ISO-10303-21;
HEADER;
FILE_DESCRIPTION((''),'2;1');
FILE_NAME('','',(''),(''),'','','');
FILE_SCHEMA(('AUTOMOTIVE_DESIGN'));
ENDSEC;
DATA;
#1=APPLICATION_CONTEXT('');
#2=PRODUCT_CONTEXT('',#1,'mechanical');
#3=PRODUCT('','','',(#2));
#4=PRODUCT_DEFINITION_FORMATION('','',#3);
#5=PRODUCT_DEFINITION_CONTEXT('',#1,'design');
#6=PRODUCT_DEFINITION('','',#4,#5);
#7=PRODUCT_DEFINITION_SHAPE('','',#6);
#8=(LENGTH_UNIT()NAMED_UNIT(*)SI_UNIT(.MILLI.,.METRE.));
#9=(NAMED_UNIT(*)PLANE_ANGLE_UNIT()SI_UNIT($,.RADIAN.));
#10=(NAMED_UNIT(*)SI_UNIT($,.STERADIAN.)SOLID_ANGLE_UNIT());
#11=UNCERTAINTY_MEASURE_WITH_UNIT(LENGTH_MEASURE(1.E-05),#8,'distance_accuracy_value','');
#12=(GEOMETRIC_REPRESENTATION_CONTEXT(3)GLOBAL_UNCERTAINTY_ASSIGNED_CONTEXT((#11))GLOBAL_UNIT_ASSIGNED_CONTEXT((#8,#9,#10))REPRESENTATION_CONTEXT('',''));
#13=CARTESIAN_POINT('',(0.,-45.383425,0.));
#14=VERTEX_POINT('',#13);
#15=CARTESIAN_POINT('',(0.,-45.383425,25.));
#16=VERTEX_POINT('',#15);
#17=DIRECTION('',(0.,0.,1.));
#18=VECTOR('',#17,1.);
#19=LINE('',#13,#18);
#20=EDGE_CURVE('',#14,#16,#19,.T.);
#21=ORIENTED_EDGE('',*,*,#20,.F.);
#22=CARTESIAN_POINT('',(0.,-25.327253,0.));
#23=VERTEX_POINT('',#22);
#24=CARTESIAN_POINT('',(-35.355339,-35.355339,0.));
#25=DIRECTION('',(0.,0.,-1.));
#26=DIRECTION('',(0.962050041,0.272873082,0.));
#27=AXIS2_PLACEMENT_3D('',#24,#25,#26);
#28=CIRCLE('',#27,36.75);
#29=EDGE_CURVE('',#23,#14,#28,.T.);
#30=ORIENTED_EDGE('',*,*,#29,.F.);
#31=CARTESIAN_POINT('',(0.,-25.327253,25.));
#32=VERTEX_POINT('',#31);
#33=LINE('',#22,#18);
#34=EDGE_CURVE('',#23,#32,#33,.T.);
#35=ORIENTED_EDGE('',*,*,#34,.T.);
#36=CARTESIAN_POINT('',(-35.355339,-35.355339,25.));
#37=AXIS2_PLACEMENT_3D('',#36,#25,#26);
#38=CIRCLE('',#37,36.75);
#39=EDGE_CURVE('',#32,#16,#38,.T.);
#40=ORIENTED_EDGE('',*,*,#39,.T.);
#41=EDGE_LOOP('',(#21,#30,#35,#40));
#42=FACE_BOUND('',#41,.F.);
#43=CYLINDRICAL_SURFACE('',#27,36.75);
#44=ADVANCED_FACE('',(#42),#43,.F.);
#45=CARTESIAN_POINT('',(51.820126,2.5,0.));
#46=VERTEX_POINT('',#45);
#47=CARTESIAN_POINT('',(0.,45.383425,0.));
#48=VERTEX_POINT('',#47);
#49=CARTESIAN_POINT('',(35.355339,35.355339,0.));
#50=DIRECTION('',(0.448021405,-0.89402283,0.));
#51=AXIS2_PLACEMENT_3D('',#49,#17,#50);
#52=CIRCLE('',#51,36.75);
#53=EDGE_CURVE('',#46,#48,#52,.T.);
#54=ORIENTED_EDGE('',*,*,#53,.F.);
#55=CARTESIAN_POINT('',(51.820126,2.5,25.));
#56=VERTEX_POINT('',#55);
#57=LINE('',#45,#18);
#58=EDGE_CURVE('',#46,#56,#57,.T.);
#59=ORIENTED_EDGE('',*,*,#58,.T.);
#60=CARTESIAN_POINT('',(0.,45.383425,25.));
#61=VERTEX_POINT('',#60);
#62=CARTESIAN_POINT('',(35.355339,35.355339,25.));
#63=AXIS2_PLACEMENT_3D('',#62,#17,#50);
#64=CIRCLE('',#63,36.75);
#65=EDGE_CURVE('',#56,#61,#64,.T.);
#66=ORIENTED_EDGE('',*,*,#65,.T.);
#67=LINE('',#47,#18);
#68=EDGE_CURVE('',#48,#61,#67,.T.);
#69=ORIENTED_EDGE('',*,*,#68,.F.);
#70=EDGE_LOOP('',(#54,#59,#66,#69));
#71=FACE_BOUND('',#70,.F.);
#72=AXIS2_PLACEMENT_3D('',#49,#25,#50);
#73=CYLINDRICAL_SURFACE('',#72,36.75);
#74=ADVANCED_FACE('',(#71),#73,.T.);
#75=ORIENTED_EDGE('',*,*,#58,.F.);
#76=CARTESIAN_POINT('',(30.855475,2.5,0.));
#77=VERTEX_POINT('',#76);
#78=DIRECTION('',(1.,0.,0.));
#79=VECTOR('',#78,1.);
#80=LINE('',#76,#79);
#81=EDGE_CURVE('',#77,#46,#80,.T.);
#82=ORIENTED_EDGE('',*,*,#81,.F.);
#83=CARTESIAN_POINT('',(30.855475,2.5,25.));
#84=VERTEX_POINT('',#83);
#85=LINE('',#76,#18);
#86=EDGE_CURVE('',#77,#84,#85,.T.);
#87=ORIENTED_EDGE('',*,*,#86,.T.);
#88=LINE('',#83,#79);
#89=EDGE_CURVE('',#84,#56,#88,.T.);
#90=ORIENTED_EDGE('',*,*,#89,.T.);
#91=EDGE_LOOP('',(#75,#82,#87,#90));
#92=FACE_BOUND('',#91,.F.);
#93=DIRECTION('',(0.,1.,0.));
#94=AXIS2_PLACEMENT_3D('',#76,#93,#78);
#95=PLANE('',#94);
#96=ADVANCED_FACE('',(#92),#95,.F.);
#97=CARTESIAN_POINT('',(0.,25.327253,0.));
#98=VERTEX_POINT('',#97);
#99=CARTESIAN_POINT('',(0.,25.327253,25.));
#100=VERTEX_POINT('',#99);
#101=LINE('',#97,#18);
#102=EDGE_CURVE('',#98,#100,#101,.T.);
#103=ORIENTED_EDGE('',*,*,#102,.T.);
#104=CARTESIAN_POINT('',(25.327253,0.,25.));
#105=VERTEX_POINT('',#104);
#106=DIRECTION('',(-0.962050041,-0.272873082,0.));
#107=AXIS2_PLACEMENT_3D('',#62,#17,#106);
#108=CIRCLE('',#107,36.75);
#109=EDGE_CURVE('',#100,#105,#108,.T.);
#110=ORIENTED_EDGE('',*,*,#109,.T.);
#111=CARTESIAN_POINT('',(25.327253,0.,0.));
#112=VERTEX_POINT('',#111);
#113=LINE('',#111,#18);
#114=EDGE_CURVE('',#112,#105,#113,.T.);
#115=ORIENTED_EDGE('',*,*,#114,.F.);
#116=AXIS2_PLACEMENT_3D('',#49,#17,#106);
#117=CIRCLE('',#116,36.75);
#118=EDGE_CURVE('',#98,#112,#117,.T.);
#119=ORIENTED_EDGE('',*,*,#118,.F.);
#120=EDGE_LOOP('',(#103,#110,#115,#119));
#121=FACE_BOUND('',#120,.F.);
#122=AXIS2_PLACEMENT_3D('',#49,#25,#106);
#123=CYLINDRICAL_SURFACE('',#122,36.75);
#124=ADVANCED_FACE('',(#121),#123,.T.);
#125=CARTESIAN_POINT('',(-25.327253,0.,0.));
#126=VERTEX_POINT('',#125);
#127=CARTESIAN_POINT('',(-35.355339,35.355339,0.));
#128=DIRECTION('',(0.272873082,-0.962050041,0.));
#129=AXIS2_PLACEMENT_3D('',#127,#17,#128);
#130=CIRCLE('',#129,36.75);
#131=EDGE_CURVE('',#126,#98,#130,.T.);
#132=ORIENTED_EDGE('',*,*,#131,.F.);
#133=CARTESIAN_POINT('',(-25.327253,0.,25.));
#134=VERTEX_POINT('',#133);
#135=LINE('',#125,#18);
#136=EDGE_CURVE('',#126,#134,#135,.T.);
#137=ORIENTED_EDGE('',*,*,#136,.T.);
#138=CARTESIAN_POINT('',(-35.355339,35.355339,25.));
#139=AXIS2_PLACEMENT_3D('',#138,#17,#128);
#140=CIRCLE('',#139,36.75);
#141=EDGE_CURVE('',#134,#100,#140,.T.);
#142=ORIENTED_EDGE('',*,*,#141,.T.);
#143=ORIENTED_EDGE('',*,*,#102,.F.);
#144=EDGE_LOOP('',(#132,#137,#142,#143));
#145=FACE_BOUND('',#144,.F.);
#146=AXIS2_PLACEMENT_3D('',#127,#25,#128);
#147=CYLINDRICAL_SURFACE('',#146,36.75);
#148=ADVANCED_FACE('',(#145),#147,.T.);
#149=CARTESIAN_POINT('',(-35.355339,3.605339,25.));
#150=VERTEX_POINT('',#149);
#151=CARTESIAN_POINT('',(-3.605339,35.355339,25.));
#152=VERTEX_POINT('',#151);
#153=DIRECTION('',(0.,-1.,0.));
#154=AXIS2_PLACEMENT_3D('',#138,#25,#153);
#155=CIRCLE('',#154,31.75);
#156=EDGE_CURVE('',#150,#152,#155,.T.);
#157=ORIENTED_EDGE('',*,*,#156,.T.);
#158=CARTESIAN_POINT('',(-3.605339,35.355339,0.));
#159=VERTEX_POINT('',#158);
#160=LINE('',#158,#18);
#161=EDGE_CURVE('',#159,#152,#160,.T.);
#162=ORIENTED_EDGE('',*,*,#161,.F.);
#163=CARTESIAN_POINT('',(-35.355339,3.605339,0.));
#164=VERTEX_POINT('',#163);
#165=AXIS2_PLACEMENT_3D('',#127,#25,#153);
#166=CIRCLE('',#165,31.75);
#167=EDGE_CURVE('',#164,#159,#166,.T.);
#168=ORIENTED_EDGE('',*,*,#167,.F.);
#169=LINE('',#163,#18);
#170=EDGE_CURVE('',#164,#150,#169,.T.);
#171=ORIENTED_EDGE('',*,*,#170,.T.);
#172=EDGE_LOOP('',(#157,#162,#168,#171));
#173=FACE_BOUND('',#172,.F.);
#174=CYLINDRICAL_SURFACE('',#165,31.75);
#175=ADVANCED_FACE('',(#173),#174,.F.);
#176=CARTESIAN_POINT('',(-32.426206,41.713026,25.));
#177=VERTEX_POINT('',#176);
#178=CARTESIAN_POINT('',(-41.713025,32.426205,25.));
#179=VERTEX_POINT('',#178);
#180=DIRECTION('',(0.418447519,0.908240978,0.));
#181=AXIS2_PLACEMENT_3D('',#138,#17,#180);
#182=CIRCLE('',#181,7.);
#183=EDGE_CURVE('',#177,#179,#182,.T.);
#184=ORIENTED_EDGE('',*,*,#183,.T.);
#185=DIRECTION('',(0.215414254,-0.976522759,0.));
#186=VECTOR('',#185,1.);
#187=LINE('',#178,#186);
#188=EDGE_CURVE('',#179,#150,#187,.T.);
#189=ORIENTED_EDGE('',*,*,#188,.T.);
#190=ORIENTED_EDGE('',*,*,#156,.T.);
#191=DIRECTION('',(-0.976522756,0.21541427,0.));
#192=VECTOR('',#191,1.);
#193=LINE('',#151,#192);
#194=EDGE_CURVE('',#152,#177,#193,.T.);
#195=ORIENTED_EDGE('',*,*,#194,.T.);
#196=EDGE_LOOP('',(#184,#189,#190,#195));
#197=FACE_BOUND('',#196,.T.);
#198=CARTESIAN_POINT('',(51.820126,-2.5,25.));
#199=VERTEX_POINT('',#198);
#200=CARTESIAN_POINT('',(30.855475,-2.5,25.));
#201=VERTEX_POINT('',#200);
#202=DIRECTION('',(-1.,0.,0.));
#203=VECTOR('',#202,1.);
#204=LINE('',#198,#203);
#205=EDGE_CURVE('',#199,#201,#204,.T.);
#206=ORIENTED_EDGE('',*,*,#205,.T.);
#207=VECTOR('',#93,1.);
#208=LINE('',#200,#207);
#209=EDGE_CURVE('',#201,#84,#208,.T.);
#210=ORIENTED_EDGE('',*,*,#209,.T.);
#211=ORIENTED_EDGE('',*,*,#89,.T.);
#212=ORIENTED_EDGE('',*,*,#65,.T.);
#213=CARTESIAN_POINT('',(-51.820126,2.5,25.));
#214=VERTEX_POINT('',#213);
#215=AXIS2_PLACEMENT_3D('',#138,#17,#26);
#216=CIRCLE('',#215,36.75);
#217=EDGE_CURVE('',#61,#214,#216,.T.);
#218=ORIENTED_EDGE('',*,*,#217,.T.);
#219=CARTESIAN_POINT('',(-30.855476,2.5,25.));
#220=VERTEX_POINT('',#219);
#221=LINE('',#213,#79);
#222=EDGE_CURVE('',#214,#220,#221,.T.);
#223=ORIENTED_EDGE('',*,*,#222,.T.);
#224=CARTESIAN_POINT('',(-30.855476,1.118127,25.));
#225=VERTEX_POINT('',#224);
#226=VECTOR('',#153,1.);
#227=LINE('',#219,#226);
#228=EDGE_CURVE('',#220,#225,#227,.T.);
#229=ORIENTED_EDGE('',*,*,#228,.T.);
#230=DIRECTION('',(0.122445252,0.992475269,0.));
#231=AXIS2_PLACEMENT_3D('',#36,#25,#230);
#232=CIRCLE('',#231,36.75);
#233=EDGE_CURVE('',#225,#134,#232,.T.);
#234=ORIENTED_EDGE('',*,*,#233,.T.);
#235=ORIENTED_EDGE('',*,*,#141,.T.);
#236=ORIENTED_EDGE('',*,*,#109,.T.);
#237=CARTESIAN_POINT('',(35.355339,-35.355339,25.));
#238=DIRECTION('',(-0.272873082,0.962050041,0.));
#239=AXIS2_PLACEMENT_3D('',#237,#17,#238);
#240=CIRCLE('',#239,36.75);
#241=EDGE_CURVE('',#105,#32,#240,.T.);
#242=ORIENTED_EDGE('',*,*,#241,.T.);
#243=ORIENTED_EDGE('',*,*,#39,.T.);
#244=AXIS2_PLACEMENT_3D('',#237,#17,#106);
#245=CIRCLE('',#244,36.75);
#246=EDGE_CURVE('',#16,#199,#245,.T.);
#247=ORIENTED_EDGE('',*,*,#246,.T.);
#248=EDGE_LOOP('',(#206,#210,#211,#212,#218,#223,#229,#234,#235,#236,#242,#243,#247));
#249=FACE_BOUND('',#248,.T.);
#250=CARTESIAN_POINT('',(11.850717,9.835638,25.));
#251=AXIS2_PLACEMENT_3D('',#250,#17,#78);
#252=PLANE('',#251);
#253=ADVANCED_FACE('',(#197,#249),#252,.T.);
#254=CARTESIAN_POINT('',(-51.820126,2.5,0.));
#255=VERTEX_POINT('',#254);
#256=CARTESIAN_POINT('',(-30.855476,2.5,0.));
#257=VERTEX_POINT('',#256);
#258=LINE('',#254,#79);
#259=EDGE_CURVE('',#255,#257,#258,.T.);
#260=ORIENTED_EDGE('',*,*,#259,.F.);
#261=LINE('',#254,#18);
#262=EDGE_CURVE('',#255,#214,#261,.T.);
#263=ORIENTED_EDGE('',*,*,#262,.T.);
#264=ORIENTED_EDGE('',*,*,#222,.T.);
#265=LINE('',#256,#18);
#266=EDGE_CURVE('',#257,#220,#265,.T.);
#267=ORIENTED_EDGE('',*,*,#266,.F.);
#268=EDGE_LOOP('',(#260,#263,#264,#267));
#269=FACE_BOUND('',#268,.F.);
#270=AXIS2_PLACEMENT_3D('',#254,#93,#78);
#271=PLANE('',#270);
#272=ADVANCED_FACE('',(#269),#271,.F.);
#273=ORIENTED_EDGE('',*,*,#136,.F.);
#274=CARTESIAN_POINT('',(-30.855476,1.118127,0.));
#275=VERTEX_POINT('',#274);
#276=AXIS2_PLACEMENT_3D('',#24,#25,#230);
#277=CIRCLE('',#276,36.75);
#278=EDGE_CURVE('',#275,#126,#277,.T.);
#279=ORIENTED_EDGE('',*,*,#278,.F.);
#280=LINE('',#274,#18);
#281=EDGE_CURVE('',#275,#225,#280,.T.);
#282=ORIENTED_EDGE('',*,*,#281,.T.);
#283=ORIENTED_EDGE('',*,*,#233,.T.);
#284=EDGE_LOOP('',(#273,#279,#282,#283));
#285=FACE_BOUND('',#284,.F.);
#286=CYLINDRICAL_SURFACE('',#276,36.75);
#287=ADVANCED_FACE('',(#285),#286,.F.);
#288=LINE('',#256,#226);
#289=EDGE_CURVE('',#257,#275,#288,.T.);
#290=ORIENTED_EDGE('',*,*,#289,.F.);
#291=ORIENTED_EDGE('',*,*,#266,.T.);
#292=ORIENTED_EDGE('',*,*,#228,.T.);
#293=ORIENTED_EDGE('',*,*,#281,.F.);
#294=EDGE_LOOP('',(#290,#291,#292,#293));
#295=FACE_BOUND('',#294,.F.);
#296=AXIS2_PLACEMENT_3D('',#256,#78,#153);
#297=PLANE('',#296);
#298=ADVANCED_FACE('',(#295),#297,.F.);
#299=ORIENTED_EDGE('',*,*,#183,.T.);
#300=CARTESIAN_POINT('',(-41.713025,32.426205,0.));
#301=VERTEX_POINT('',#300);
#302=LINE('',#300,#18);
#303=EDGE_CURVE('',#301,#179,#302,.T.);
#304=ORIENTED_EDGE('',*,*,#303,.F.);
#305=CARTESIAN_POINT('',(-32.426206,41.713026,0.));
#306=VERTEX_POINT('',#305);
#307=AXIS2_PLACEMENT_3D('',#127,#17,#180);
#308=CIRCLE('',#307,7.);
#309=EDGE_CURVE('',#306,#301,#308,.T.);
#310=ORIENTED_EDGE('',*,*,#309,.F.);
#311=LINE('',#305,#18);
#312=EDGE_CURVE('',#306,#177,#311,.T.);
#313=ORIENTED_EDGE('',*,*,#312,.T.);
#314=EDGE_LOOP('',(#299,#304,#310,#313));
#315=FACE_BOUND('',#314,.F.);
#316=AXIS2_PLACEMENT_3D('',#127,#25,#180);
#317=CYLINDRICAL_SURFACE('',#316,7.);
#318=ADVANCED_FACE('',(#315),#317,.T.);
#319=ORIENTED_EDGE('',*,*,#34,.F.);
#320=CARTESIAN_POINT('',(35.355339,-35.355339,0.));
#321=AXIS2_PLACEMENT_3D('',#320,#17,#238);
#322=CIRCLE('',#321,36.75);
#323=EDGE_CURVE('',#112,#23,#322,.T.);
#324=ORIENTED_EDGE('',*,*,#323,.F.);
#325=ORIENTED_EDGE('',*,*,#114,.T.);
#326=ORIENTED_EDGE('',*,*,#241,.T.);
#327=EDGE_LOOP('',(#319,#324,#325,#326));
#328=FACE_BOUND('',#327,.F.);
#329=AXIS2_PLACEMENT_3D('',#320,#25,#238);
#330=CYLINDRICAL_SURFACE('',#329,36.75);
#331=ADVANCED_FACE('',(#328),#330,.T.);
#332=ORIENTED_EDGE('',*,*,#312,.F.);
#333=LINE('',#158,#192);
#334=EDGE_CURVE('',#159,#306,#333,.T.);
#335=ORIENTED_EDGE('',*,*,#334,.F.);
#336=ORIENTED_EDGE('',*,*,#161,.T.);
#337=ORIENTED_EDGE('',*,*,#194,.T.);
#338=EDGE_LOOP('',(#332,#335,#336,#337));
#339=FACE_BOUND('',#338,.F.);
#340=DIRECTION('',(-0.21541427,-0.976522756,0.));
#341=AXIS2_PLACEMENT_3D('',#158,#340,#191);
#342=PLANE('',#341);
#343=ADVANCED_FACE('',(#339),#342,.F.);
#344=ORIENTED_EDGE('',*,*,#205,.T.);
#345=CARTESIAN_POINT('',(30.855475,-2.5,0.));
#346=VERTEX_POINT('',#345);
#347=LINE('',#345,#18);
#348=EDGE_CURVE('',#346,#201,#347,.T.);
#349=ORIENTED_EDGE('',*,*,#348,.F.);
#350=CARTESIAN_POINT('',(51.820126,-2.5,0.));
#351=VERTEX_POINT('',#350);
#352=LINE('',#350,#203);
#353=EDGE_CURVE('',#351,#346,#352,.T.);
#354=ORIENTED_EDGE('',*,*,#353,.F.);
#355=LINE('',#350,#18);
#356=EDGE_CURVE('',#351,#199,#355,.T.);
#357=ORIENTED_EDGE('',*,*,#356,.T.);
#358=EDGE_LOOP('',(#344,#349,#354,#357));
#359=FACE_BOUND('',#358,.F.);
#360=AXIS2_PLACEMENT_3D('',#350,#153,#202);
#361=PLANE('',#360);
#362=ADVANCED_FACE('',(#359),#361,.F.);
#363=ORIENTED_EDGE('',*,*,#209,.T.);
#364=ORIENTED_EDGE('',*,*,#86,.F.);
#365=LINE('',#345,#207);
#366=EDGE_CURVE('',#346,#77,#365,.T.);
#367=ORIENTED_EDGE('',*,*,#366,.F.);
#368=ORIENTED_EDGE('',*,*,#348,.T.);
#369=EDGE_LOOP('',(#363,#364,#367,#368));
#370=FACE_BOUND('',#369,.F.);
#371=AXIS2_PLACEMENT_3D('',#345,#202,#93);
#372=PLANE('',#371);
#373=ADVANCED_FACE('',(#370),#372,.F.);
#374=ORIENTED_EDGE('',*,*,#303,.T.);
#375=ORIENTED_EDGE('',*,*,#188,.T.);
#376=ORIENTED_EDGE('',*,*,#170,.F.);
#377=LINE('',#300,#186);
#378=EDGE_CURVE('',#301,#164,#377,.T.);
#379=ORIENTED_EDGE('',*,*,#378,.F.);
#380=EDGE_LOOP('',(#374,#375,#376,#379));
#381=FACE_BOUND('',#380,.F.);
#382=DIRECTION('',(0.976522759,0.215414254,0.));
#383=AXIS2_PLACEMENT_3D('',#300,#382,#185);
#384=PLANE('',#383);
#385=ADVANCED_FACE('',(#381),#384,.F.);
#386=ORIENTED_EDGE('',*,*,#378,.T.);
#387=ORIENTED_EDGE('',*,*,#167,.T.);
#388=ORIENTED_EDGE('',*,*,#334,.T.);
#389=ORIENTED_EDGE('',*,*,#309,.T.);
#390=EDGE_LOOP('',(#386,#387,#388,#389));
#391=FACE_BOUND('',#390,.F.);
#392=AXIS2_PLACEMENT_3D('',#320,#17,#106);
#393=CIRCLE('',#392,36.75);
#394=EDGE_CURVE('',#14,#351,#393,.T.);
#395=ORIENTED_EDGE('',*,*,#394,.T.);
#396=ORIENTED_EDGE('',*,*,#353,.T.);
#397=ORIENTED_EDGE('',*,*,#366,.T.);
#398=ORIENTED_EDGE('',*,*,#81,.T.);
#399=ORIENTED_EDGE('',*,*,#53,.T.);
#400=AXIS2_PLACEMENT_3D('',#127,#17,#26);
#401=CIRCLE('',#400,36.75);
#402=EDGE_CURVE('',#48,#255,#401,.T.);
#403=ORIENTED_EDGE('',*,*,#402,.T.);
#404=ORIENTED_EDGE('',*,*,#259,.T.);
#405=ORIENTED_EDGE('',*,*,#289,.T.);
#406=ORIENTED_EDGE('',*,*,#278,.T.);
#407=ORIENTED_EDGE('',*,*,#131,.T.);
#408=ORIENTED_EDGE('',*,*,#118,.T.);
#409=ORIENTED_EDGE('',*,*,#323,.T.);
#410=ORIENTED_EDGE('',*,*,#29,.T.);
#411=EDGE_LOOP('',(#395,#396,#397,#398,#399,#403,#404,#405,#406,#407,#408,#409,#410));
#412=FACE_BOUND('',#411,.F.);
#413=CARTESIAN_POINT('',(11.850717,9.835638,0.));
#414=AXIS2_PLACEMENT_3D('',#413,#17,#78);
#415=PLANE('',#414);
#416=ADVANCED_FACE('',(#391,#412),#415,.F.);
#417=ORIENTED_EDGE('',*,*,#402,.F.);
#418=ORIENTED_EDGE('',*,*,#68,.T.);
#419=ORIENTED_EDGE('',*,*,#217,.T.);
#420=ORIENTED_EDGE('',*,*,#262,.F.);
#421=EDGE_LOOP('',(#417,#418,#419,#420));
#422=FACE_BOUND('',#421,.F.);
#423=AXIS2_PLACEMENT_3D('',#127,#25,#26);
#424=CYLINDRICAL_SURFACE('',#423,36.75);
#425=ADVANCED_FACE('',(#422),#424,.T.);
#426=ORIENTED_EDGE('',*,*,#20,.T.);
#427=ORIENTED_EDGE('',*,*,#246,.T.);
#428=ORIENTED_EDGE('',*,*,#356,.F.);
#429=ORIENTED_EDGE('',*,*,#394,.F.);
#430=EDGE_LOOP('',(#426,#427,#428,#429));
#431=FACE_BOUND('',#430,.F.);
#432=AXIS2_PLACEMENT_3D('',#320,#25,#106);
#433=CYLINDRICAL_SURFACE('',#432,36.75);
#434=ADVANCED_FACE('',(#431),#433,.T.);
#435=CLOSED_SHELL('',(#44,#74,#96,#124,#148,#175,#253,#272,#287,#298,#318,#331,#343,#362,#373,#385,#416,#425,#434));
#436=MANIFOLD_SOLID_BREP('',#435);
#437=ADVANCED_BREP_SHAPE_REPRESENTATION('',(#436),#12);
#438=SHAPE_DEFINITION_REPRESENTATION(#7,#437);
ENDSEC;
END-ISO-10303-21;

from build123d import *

# Parameters (mm, degrees)
F2_DEPTH = 25


# Not quite as in the source:
# - ends of sketch curves that miss each other by under 0.0002 mm in the source are joined


with BuildPart() as f2:
    # F1 (on face) → F2 (new body)
    with BuildSketch(Plane.XY):
        with BuildLine():
            ThreePointArc((-30.855476, 1.1181271498), (-28.0698825324, 0.6652748768), (-25.3272532308, 0))
            ThreePointArc((-25.3272532308, 0), (-9.3691647914, 9.3691647914), (0, 25.3272532308))
            ThreePointArc((0, 25.3272532308), (9.3691647914, 9.3691647914), (25.3272532308, 0))
            ThreePointArc((25.3272532308, 0), (9.3691647914, -9.3691647914), (0, -25.3272532308))
            ThreePointArc((0, -25.3272532308), (1.394661, -35.355339), (0, -45.3834247692))
            ThreePointArc((0, -45.3834247692), (58.7852402391, -63.6679197359), (51.8201256429, -2.5))
            Line((51.8201256429, -2.5), (30.855475, -2.5))
            Line((30.855475, -2.5), (30.855475, 2.5))
            Line((30.855475, 2.5), (51.8201256429, 2.5))
            ThreePointArc((51.8201256429, 2.5), (58.7852402391, 63.6679197359), (0, 45.3834247692))
            ThreePointArc((0, 45.3834247692), (-58.7852402391, 63.6679197359), (-51.8201256429, 2.5))
            Line((-51.8201256429, 2.5), (-30.855476, 2.5))
            Line((-30.855476, 2.5), (-30.855476, 1.1181271498))
        make_face()
        with BuildLine():
            ThreePointArc((-35.355339, 3.605339), (-57.8059793027, 57.8059793027), (-3.605339, 35.355339))
            Line((-3.605339, 35.355339), (-32.426206, 41.713026))
            ThreePointArc((-32.426206, 41.713026), (-40.3050867894, 40.3050861472), (-41.7130253526, 32.4262052983))
            Line((-41.7130253526, 32.4262052983), (-35.355339, 3.605339))
        make_face(mode=Mode.SUBTRACT)
    extrude(amount=F2_DEPTH)


solid = f2.part
